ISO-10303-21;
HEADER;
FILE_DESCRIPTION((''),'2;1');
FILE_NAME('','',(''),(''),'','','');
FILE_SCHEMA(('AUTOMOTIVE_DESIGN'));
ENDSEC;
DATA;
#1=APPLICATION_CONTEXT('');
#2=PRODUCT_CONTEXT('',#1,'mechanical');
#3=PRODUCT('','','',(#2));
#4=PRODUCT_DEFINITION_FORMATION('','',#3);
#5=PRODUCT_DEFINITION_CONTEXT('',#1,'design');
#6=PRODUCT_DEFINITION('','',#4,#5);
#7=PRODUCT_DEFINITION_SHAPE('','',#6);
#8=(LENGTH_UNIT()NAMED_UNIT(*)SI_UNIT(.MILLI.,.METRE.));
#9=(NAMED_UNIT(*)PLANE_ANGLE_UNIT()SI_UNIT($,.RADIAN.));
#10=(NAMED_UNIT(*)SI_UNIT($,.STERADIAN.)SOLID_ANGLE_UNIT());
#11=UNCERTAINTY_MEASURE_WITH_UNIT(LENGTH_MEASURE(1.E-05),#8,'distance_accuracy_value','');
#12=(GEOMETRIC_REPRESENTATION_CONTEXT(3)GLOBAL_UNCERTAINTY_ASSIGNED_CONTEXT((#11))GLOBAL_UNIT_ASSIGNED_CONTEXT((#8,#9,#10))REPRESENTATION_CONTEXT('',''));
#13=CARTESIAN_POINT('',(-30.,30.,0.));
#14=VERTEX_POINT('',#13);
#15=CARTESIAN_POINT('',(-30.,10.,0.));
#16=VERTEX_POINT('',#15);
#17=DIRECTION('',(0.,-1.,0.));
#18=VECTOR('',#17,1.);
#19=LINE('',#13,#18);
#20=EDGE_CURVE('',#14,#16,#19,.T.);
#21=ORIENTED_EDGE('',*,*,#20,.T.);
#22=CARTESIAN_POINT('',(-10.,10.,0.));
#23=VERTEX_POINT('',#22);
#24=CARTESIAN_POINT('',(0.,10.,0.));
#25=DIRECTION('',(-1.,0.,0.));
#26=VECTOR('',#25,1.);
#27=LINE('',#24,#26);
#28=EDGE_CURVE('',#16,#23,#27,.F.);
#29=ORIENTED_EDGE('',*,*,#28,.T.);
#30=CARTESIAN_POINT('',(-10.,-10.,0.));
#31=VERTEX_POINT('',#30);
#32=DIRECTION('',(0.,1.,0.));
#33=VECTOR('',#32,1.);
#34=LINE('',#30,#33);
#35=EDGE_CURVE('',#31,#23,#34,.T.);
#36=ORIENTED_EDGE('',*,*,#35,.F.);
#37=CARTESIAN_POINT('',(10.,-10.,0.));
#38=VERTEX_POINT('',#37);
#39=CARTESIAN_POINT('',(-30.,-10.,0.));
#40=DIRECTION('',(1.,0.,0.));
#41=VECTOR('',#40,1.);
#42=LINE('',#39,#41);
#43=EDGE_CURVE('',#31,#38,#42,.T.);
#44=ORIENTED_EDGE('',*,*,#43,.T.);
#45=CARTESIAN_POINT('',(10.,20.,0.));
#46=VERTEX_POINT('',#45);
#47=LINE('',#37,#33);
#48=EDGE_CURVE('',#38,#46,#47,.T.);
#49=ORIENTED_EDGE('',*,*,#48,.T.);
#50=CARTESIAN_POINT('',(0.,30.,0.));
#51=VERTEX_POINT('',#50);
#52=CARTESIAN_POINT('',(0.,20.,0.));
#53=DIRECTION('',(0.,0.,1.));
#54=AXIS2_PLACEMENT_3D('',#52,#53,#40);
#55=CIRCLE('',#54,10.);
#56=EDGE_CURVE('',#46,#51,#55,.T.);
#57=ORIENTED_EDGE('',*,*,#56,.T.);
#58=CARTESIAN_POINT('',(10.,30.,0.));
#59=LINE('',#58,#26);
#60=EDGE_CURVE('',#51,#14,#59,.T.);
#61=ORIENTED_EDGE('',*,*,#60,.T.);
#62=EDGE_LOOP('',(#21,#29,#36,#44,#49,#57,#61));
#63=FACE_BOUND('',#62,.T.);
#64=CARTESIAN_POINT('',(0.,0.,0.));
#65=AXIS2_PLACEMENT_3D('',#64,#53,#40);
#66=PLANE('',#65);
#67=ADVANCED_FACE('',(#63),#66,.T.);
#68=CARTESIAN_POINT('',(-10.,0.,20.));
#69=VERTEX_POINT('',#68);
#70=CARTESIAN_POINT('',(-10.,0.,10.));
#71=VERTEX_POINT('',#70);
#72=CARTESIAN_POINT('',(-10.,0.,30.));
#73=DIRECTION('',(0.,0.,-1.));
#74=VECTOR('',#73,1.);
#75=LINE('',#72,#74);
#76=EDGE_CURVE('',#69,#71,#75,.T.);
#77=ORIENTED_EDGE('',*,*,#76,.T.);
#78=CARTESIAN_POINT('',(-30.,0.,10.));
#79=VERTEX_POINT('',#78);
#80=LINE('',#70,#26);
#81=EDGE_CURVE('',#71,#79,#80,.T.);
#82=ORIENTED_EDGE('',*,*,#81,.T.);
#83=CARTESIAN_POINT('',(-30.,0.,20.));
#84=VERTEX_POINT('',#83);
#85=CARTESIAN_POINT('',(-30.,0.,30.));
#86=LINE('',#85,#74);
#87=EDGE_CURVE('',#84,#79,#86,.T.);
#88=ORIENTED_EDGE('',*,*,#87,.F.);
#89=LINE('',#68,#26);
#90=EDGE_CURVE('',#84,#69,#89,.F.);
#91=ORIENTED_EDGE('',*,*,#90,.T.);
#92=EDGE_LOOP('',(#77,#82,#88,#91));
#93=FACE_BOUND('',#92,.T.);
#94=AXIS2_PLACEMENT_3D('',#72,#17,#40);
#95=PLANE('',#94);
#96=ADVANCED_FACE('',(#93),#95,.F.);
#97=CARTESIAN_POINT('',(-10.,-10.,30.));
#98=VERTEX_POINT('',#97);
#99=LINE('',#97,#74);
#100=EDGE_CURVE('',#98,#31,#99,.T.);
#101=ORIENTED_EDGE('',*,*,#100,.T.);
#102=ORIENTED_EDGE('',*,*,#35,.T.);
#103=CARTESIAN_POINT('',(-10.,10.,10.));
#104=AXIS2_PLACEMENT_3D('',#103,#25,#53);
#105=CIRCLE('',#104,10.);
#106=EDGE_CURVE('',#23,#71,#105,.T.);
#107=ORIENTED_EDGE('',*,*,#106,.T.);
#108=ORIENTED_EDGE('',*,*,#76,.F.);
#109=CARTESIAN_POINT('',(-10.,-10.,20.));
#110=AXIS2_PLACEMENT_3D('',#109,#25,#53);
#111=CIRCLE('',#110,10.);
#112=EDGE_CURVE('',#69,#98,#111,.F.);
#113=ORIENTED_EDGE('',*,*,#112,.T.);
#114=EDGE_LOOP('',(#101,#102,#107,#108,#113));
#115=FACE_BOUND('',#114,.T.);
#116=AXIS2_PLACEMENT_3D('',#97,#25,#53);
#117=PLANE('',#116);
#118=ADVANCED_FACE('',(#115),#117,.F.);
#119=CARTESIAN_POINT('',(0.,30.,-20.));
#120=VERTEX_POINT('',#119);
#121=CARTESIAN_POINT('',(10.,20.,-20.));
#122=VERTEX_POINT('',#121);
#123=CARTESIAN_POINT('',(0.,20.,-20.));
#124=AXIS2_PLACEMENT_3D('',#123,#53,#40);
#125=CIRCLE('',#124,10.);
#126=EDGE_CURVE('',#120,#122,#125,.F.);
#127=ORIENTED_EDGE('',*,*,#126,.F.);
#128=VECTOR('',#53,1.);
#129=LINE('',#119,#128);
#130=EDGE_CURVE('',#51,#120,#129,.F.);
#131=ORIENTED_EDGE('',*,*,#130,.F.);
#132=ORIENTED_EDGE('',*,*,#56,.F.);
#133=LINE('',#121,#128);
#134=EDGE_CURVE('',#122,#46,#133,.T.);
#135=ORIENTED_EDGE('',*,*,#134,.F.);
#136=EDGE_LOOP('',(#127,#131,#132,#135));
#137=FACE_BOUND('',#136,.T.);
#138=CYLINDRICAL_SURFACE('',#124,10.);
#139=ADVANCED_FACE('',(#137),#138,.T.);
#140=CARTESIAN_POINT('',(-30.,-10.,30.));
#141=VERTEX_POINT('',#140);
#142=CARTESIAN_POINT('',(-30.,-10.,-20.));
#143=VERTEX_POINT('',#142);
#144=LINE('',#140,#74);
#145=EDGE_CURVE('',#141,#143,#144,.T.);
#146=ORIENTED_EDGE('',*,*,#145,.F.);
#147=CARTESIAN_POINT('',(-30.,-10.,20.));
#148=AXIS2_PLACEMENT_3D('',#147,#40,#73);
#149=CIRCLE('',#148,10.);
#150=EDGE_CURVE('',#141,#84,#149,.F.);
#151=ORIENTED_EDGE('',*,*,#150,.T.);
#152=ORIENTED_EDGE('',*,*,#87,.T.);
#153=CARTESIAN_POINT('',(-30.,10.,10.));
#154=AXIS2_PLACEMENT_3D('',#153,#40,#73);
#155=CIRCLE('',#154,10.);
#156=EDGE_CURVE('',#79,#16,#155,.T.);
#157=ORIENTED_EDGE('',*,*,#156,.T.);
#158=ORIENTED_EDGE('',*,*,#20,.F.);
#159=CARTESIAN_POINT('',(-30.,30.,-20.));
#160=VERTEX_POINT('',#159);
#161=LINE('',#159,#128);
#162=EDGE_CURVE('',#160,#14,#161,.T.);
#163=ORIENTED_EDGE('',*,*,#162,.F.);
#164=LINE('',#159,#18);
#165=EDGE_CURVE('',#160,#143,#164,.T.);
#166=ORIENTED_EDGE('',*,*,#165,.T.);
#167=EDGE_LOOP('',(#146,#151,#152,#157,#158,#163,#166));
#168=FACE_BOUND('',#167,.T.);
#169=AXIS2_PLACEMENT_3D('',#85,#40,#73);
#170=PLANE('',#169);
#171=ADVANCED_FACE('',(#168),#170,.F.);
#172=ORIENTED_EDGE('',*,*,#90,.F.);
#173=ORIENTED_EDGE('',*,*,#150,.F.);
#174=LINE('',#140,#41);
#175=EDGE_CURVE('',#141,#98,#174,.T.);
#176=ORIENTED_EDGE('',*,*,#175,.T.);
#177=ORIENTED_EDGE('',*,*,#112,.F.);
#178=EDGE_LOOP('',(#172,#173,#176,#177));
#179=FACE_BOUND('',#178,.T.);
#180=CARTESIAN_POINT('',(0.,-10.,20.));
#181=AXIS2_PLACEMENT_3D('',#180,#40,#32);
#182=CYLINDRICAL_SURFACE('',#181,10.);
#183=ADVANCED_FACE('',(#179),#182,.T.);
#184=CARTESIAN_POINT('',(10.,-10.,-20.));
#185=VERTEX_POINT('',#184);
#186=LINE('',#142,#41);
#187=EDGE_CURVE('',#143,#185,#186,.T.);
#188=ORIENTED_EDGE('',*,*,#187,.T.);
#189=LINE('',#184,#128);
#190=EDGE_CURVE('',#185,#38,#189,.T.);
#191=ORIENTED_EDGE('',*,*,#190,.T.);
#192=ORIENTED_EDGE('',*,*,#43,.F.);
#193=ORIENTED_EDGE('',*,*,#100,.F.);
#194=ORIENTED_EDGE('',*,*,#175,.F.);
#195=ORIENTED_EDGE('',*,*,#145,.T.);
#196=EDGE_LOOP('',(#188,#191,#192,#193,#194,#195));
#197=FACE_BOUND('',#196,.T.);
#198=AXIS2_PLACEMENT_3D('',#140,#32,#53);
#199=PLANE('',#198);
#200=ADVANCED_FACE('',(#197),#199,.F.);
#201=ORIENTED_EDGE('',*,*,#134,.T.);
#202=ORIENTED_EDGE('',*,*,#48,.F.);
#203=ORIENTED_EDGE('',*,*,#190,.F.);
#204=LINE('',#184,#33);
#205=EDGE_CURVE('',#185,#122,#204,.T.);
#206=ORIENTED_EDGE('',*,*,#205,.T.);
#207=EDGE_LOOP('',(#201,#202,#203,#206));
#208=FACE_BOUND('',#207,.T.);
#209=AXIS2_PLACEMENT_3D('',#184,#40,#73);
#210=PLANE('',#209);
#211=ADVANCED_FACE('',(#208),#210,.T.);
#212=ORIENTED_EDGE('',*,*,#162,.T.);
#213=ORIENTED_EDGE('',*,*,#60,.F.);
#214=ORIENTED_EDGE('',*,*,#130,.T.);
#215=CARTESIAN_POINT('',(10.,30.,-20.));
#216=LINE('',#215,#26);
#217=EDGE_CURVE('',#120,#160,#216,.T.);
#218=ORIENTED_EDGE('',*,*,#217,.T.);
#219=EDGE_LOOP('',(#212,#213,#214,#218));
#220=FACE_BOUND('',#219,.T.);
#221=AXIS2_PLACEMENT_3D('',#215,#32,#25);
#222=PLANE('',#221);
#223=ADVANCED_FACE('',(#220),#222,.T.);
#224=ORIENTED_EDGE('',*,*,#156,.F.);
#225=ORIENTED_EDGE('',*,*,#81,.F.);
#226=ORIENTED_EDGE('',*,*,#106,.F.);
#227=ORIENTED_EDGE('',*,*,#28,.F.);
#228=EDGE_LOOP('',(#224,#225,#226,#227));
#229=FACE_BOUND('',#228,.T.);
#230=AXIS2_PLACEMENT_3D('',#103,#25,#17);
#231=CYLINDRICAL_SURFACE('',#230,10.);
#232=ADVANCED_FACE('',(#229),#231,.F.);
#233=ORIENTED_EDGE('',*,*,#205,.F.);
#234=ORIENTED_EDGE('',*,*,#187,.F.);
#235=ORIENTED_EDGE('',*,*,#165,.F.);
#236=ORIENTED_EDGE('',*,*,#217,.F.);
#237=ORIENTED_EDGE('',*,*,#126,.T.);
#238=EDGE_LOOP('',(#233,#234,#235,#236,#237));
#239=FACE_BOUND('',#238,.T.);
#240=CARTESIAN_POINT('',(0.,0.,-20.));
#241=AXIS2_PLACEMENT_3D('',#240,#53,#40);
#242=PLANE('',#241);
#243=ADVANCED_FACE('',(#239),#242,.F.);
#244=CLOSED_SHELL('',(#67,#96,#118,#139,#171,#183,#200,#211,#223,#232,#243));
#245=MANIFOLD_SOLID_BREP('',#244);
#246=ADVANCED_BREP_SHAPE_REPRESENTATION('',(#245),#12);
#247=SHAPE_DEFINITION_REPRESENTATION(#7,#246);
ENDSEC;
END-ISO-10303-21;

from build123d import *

# Parameters (mm, degrees)
SKETCH1_W           = 20
SKETCH1_H           = 10
BOSS_EXTRUDE1_DEPTH = 30
SKETCH2_W           = 40
SKETCH2_H           = 40
BOSS_EXTRUDE2_DEPTH = 20
FILLET1_R           = 10


with BuildPart() as part:
    # Sketch1 → Boss-Extrude1 (new body)
    with BuildSketch(Plane.XY):
        with Locations((-20, -5)):
            Rectangle(SKETCH1_W, SKETCH1_H)
    extrude(amount=BOSS_EXTRUDE1_DEPTH)

    # Sketch2 → Boss-Extrude2 (add)
    with BuildSketch(Plane.XY):
        with Locations((-10, 10)):
            Rectangle(SKETCH2_W, SKETCH2_H)
    extrude(amount=-BOSS_EXTRUDE2_DEPTH)

    # Fillet1
    fillet1_edges = [part.edges().sort_by_distance(p)[0] for p in [
        (-20, 0, 0),
        (10, 30, -10),
        (-20, 0, 30),
    ]]
    fillet(fillet1_edges, radius=FILLET1_R - 0.0001)  # a hair under: the kernel refuses the full size


solid = part.part
